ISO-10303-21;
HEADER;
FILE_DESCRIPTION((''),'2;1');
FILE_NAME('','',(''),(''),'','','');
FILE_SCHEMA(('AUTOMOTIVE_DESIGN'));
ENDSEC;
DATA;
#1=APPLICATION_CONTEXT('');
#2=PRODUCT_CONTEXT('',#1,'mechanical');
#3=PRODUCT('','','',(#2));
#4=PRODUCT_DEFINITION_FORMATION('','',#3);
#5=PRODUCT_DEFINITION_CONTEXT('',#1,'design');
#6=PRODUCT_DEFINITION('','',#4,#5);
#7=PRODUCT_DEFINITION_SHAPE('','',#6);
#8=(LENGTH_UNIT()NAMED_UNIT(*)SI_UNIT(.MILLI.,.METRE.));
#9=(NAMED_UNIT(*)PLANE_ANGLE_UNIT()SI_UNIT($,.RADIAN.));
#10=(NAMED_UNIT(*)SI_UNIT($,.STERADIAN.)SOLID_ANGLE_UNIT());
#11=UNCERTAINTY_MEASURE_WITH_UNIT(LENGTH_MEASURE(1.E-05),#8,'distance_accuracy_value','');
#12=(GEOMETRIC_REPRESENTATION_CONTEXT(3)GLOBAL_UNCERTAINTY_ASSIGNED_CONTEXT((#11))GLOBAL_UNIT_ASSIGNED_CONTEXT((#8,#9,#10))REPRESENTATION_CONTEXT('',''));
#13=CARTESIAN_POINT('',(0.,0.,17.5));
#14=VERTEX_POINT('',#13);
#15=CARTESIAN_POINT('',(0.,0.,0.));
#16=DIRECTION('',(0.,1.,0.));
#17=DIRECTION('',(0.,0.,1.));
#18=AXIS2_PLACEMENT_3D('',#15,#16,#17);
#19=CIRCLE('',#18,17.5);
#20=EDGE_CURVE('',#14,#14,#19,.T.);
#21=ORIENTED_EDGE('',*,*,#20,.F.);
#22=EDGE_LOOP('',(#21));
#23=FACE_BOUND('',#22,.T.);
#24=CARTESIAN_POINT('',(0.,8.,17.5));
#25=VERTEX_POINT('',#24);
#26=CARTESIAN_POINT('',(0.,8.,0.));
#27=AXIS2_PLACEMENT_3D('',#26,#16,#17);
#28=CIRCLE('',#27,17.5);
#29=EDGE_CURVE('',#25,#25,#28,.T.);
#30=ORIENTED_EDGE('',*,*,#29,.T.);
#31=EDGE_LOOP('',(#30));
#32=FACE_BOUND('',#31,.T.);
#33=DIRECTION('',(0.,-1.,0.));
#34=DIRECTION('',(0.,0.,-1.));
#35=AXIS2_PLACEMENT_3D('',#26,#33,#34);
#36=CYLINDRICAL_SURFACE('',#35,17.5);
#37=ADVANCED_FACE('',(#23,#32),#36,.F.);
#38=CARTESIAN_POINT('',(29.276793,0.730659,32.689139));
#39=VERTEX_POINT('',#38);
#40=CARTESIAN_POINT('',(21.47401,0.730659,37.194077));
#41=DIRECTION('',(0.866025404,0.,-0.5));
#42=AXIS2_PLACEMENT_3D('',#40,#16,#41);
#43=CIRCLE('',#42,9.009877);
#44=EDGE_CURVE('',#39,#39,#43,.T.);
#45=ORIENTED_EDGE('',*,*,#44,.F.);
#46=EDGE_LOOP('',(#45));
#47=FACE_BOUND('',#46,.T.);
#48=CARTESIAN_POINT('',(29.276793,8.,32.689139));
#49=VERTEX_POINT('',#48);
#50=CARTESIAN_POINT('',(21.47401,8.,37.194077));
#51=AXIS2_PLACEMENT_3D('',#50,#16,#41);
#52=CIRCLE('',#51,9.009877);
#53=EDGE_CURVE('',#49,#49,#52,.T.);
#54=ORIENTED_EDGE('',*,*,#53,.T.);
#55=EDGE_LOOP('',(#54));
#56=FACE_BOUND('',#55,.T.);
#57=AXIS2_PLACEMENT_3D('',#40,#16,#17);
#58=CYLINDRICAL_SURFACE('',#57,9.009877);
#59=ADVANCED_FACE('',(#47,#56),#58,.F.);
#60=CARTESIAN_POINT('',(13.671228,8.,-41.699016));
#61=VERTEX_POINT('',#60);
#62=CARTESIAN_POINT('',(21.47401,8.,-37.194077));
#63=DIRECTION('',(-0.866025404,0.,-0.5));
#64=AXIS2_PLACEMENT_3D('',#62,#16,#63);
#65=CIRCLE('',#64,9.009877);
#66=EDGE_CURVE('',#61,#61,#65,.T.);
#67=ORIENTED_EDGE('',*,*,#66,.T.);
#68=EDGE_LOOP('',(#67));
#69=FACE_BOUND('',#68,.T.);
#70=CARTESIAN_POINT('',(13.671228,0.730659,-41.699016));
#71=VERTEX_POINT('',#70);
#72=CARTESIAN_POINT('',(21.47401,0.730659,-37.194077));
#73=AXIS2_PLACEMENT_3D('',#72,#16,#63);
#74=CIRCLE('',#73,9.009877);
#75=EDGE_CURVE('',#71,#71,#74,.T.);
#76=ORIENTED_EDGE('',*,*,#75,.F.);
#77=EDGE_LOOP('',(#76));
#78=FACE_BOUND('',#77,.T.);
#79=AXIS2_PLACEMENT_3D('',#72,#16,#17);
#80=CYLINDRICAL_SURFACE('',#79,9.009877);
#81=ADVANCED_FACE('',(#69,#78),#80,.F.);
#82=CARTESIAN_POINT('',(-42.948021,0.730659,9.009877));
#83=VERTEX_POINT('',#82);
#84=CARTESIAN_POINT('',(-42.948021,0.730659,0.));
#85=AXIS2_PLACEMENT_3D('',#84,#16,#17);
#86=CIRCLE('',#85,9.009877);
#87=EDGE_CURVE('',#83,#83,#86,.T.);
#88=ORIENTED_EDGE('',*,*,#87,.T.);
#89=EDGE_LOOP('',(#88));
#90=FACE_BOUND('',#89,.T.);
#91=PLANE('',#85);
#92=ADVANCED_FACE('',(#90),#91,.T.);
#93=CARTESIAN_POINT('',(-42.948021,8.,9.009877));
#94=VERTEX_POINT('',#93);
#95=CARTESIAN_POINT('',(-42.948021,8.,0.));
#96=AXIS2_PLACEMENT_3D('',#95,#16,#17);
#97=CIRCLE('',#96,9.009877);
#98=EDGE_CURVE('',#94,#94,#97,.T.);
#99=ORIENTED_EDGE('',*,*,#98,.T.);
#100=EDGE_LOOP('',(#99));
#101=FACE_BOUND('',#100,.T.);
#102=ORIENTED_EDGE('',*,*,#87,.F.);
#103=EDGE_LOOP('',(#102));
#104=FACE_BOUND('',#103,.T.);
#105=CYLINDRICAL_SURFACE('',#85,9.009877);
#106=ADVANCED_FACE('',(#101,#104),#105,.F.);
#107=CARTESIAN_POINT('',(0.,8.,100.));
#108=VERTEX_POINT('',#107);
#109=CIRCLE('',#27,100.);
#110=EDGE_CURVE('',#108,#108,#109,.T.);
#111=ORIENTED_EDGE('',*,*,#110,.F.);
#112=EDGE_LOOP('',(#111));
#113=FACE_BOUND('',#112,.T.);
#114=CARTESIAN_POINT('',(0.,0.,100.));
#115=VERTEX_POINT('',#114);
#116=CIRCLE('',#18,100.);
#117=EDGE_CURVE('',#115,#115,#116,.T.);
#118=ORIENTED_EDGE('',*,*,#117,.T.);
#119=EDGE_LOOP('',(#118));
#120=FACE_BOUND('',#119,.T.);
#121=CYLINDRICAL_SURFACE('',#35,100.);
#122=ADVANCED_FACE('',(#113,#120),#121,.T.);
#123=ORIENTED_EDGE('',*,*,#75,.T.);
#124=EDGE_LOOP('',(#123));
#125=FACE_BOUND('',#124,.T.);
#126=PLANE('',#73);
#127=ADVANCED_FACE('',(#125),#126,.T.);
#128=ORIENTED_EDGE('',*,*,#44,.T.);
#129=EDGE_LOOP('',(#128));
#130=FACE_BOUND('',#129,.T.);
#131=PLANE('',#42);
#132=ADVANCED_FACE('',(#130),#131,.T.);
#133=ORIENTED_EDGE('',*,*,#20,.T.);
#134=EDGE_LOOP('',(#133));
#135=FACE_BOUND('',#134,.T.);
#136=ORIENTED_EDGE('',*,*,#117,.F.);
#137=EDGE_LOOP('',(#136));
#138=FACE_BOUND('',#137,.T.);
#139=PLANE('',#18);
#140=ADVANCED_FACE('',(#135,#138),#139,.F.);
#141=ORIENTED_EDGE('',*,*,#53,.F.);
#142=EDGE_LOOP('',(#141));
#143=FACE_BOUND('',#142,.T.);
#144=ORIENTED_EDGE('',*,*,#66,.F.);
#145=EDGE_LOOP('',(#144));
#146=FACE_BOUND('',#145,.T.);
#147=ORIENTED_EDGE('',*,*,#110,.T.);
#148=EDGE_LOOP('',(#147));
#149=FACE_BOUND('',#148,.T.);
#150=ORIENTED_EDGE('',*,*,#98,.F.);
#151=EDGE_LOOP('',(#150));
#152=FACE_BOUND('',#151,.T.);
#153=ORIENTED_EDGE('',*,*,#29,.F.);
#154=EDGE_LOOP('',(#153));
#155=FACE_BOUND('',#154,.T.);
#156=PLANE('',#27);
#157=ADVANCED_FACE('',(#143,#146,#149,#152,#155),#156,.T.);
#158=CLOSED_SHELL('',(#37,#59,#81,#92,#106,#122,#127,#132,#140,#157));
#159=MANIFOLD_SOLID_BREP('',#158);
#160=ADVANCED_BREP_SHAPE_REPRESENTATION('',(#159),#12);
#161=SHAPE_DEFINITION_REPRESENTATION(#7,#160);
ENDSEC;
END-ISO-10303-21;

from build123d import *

# Parameters (mm, degrees)
SKETCH1_R           = 100
BOSS_EXTRUDE1_DEPTH = 8
SKETCH2_R           = 17.5
CUT_EXTRUDE1_DEPTH  = 142.647449677
SKETCH3_R           = 9.009876889
CUT_EXTRUDE2_DEPTH  = 7.269340773
CIRPATTERN1_COUNT   = 3


with BuildPart() as part:
    # Sketch1 → Boss-Extrude1 (new body)
    with BuildSketch(Plane(origin=(0, 0, 0), x_dir=(1, 0, 0), z_dir=(0, 1, 0))):
        Circle(SKETCH1_R)
    extrude(amount=BOSS_EXTRUDE1_DEPTH)

    # Sketch2 → Cut-Extrude1 (cut, through all)
    with BuildSketch(Plane(origin=(0, 0, 0), x_dir=(1, 0, 0), z_dir=(0, 1, 0))):
        Circle(SKETCH2_R)
    extrude(amount=CUT_EXTRUDE1_DEPTH, mode=Mode.SUBTRACT)

    # Sketch3 → Cut-Extrude2 (cut)
    with BuildSketch(Plane(origin=(0, 8, 0), x_dir=(1, 0, 0), z_dir=(0, 1, 0))):
        with Locations((-42.948020952, 0)):
            Circle(SKETCH3_R)
    cut_extrude2 = extrude(amount=-CUT_EXTRUDE2_DEPTH, mode=Mode.SUBTRACT)

    # CirPattern1: Cut-Extrude2 ×3 about axis
    cirpattern1_axis = Axis((0, 0, 0), (0, 1, 0))
    for i in range(1, CIRPATTERN1_COUNT):
        add(cut_extrude2.rotate(cirpattern1_axis, i * 360 / CIRPATTERN1_COUNT), mode=Mode.SUBTRACT)


solid = part.part
